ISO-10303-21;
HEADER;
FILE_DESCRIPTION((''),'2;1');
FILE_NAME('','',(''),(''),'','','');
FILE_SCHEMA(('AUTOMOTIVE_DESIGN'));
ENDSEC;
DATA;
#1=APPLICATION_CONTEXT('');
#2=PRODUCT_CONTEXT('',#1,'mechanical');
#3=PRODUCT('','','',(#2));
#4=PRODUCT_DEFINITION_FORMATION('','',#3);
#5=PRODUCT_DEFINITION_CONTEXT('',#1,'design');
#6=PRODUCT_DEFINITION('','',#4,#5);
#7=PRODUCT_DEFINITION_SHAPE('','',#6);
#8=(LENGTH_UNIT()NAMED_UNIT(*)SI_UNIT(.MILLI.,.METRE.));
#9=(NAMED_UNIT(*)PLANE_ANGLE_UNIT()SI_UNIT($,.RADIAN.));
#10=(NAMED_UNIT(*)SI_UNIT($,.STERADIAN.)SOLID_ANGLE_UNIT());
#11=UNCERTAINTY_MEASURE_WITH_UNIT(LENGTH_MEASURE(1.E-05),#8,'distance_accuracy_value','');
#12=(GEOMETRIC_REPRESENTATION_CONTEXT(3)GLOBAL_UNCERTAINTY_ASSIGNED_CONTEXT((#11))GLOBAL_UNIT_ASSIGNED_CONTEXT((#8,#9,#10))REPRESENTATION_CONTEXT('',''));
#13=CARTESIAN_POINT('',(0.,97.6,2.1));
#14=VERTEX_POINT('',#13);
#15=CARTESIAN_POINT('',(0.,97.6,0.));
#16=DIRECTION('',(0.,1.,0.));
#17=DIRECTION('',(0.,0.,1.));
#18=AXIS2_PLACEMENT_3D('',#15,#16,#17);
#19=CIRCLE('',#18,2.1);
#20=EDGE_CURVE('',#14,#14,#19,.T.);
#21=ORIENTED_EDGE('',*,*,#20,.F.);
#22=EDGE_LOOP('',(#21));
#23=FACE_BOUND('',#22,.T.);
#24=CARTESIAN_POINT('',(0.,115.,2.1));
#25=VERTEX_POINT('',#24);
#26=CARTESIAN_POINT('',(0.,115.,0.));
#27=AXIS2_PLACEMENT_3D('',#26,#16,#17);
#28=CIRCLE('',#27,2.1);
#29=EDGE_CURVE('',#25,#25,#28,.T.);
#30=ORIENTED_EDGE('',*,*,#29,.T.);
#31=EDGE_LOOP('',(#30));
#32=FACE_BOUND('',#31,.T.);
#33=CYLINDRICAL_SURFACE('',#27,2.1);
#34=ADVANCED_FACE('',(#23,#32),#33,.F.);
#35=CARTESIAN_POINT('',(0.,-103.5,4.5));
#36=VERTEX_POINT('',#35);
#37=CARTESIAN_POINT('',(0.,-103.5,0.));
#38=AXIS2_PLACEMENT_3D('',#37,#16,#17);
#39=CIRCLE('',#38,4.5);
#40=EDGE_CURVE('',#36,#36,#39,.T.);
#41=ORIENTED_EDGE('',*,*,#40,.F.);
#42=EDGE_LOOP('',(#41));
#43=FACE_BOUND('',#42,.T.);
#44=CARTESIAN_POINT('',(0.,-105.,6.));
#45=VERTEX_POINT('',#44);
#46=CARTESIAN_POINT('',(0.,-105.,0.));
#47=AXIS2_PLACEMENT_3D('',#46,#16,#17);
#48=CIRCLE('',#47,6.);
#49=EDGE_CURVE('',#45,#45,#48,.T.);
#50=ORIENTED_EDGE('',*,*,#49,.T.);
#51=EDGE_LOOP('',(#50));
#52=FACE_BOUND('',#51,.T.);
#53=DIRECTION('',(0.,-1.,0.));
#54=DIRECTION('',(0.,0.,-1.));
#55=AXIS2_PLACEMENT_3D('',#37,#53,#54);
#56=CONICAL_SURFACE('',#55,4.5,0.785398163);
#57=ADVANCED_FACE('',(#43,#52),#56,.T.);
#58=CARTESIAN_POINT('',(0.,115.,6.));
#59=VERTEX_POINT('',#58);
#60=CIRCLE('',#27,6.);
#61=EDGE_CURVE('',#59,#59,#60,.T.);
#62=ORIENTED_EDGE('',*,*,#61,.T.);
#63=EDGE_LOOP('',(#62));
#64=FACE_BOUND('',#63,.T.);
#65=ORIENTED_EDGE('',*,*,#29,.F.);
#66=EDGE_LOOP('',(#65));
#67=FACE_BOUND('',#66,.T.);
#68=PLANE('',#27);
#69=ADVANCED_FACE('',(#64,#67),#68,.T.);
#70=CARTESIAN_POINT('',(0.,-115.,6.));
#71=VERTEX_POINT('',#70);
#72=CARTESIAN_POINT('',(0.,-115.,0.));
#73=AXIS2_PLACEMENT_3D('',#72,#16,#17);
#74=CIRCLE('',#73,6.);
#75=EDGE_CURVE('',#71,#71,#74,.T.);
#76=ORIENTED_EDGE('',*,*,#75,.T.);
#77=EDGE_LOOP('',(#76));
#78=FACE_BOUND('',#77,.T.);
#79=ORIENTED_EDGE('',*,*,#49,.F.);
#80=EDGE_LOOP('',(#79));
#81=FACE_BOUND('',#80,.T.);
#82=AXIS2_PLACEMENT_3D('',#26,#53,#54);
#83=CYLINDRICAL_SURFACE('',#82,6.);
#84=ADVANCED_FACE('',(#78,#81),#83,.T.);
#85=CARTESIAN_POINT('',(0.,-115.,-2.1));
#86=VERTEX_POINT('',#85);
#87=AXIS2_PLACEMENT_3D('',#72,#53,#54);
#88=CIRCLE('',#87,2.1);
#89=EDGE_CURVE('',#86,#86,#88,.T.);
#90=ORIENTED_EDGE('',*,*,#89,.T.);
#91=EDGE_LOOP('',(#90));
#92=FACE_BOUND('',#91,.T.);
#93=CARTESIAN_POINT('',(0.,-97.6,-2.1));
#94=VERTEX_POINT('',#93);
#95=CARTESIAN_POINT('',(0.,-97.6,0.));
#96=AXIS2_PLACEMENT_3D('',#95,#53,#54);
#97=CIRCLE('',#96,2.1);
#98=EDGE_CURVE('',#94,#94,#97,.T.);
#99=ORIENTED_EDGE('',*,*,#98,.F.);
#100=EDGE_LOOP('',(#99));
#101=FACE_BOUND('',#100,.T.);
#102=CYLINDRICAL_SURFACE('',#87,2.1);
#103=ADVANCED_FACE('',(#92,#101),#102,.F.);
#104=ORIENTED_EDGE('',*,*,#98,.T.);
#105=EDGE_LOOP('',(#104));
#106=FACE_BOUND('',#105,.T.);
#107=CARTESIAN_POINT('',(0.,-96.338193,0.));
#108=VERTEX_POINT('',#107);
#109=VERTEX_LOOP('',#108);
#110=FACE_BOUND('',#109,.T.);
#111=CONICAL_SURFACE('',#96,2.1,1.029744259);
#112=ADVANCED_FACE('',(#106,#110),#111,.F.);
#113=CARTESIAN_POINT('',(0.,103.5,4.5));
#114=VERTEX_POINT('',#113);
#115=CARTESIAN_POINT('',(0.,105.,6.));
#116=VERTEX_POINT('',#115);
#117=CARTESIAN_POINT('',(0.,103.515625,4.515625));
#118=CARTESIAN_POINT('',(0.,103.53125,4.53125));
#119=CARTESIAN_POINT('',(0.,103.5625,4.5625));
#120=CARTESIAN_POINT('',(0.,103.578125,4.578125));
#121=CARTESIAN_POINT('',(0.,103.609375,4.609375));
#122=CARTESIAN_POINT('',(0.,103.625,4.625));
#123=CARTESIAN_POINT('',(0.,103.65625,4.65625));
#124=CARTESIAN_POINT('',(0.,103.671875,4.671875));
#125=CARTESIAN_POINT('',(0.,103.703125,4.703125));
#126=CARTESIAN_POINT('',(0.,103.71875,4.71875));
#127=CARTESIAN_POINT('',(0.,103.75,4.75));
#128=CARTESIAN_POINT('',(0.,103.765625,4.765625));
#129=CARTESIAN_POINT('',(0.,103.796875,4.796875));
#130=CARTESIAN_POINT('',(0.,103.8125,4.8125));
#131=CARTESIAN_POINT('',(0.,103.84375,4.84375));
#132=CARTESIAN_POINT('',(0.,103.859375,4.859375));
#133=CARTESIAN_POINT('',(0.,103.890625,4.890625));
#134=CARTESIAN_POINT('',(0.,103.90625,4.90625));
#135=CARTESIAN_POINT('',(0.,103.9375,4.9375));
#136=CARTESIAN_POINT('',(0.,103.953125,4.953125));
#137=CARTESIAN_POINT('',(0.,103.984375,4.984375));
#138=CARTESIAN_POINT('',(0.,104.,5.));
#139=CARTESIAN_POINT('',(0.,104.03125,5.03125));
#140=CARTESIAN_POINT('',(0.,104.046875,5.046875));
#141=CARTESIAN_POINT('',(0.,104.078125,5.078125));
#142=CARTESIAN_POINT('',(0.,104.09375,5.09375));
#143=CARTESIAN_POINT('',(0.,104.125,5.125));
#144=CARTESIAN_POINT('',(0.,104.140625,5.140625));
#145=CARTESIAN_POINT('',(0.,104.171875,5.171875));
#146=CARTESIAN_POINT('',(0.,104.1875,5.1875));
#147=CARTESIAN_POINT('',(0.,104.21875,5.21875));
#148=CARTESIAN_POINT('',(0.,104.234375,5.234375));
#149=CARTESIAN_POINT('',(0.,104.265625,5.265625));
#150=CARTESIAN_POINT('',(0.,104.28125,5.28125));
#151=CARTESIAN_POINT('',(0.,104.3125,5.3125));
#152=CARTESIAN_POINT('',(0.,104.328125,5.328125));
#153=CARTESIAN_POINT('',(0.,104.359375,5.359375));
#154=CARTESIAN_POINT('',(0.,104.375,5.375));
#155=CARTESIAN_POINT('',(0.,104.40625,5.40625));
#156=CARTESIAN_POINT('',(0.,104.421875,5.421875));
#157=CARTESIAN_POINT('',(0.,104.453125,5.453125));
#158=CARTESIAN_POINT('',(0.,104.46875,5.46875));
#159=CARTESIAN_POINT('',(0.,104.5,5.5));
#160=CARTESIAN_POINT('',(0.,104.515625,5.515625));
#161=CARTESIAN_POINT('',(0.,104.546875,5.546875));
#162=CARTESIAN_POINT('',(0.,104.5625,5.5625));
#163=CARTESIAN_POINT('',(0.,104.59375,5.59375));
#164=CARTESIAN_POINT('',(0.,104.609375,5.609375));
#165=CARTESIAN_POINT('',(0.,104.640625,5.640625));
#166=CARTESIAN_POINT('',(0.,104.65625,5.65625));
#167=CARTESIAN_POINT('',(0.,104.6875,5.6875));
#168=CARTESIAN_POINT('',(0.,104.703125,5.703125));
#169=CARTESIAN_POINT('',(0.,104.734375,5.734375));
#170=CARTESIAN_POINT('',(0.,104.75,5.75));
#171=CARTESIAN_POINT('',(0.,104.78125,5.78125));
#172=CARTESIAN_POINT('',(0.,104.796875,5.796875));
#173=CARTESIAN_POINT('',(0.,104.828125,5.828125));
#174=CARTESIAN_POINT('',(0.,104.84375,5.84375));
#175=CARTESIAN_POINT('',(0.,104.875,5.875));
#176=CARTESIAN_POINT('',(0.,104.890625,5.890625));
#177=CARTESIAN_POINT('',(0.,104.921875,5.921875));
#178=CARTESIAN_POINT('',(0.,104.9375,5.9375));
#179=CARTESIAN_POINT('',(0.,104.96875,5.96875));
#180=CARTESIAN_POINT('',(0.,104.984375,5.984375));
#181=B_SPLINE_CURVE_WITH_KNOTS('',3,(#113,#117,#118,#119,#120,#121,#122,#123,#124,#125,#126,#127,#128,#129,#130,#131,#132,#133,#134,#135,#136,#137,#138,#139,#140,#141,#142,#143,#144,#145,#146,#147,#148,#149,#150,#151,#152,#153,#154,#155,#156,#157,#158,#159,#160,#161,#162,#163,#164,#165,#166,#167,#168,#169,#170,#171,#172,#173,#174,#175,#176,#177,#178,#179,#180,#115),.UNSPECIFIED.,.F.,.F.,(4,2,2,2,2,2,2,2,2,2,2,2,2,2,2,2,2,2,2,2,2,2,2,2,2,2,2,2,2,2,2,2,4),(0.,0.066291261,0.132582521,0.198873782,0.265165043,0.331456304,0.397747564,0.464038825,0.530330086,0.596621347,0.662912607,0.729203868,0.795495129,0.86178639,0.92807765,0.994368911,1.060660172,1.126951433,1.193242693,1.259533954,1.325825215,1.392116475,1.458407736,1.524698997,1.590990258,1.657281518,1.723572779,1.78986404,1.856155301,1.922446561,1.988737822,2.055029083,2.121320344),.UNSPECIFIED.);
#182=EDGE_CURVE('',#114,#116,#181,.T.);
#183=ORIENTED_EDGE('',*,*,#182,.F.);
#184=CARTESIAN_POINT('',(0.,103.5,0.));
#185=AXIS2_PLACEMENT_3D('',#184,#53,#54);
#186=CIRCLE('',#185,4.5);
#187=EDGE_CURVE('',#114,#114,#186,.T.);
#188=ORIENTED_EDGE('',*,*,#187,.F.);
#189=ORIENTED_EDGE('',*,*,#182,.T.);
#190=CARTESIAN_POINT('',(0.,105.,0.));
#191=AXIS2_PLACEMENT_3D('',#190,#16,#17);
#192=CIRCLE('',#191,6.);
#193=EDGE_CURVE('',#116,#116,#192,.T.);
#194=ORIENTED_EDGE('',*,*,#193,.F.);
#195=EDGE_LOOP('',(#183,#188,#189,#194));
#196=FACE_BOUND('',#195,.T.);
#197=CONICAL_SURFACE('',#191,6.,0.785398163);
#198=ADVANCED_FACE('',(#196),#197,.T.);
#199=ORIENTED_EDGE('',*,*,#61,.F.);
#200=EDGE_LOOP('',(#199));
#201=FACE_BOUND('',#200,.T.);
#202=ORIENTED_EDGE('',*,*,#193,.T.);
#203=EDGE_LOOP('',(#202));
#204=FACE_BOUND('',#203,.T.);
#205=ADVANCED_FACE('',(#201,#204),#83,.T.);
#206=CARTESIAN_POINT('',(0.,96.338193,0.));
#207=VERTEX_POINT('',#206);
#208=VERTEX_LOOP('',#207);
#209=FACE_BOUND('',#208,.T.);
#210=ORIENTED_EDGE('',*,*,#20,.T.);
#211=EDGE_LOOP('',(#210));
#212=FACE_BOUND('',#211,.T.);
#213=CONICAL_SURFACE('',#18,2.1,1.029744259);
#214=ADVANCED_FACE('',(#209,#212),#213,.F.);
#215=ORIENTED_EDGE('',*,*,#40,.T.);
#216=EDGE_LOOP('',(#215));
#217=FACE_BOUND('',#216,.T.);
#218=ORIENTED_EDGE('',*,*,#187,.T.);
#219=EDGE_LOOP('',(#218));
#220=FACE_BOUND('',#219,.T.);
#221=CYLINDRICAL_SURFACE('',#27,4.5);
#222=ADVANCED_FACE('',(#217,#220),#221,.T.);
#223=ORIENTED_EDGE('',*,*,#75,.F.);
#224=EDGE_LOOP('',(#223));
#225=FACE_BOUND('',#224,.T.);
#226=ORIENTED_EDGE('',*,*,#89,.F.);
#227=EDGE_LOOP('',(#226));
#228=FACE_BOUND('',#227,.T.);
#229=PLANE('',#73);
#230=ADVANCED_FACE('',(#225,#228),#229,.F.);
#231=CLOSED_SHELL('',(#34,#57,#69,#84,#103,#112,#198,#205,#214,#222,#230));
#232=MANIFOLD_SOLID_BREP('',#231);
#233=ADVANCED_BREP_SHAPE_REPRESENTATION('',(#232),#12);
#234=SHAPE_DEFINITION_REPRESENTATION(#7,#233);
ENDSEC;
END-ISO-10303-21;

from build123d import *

# Parameters (mm, degrees)
SKETCH_1_R      = 6
EXTRUDE_1_DEPTH = 115
SKETCH_2_W      = 1.5
SKETCH_2_H      = 210
CHAMFER_1_SIZE  = 1.5


with BuildPart() as part:
    # 草图1 → 凸台-拉伸1 (new, symmetric)
    with BuildSketch(Plane(origin=(0, 0, 0), x_dir=(1, 0, 0), z_dir=(0, 1, 0))):
        with Locations(Location((0, 0, 0), (0, 0, 270))):
            Circle(SKETCH_1_R)
    extrude(amount=EXTRUDE_1_DEPTH, both=True)

    # 草图2 → 切除-旋转1 (revolve, cut)
    with BuildSketch(Plane.XY, mode=Mode.PRIVATE) as cut_revolve_1_sk:
        with Locations((5.25, 0)):
            Rectangle(SKETCH_2_W, SKETCH_2_H)
    revolve(cut_revolve_1_sk.sketch.rotate(Axis((0, 115, 0), (0, -1, 0)), 90), axis=Axis((0, 115, 0), (0, -1, 0)), mode=Mode.SUBTRACT)

    # 倒角1
    chamfer_1_edges = [part.edges().sort_by_distance(p)[0] for p in [
        (0, 105, -4.5),
        (0, -105, -4.5),
    ]]
    chamfer(chamfer_1_edges, length=CHAMFER_1_SIZE - 0.0001)  # a hair under: the kernel refuses the full size

    # 草图3 → M5 螺纹孔1 (revolve, cut)
    with BuildSketch(Plane(origin=(0, -115, 0), x_dir=(0, 0, -1), z_dir=(1, 0, 0))):
        Polygon((0, 0), (0, 18.6618073), (2.1, 17.4), (2.1, 0), align=None)
    hole_wizard_m5_1 = revolve(axis=Axis((0, -121.35, 0), (0, 1, 0)), mode=Mode.SUBTRACT)

    # 镜向1: M5 螺纹孔1 across plane
    add(hole_wizard_m5_1.mirror(Plane.ZX), mode=Mode.SUBTRACT)


solid = part.part
